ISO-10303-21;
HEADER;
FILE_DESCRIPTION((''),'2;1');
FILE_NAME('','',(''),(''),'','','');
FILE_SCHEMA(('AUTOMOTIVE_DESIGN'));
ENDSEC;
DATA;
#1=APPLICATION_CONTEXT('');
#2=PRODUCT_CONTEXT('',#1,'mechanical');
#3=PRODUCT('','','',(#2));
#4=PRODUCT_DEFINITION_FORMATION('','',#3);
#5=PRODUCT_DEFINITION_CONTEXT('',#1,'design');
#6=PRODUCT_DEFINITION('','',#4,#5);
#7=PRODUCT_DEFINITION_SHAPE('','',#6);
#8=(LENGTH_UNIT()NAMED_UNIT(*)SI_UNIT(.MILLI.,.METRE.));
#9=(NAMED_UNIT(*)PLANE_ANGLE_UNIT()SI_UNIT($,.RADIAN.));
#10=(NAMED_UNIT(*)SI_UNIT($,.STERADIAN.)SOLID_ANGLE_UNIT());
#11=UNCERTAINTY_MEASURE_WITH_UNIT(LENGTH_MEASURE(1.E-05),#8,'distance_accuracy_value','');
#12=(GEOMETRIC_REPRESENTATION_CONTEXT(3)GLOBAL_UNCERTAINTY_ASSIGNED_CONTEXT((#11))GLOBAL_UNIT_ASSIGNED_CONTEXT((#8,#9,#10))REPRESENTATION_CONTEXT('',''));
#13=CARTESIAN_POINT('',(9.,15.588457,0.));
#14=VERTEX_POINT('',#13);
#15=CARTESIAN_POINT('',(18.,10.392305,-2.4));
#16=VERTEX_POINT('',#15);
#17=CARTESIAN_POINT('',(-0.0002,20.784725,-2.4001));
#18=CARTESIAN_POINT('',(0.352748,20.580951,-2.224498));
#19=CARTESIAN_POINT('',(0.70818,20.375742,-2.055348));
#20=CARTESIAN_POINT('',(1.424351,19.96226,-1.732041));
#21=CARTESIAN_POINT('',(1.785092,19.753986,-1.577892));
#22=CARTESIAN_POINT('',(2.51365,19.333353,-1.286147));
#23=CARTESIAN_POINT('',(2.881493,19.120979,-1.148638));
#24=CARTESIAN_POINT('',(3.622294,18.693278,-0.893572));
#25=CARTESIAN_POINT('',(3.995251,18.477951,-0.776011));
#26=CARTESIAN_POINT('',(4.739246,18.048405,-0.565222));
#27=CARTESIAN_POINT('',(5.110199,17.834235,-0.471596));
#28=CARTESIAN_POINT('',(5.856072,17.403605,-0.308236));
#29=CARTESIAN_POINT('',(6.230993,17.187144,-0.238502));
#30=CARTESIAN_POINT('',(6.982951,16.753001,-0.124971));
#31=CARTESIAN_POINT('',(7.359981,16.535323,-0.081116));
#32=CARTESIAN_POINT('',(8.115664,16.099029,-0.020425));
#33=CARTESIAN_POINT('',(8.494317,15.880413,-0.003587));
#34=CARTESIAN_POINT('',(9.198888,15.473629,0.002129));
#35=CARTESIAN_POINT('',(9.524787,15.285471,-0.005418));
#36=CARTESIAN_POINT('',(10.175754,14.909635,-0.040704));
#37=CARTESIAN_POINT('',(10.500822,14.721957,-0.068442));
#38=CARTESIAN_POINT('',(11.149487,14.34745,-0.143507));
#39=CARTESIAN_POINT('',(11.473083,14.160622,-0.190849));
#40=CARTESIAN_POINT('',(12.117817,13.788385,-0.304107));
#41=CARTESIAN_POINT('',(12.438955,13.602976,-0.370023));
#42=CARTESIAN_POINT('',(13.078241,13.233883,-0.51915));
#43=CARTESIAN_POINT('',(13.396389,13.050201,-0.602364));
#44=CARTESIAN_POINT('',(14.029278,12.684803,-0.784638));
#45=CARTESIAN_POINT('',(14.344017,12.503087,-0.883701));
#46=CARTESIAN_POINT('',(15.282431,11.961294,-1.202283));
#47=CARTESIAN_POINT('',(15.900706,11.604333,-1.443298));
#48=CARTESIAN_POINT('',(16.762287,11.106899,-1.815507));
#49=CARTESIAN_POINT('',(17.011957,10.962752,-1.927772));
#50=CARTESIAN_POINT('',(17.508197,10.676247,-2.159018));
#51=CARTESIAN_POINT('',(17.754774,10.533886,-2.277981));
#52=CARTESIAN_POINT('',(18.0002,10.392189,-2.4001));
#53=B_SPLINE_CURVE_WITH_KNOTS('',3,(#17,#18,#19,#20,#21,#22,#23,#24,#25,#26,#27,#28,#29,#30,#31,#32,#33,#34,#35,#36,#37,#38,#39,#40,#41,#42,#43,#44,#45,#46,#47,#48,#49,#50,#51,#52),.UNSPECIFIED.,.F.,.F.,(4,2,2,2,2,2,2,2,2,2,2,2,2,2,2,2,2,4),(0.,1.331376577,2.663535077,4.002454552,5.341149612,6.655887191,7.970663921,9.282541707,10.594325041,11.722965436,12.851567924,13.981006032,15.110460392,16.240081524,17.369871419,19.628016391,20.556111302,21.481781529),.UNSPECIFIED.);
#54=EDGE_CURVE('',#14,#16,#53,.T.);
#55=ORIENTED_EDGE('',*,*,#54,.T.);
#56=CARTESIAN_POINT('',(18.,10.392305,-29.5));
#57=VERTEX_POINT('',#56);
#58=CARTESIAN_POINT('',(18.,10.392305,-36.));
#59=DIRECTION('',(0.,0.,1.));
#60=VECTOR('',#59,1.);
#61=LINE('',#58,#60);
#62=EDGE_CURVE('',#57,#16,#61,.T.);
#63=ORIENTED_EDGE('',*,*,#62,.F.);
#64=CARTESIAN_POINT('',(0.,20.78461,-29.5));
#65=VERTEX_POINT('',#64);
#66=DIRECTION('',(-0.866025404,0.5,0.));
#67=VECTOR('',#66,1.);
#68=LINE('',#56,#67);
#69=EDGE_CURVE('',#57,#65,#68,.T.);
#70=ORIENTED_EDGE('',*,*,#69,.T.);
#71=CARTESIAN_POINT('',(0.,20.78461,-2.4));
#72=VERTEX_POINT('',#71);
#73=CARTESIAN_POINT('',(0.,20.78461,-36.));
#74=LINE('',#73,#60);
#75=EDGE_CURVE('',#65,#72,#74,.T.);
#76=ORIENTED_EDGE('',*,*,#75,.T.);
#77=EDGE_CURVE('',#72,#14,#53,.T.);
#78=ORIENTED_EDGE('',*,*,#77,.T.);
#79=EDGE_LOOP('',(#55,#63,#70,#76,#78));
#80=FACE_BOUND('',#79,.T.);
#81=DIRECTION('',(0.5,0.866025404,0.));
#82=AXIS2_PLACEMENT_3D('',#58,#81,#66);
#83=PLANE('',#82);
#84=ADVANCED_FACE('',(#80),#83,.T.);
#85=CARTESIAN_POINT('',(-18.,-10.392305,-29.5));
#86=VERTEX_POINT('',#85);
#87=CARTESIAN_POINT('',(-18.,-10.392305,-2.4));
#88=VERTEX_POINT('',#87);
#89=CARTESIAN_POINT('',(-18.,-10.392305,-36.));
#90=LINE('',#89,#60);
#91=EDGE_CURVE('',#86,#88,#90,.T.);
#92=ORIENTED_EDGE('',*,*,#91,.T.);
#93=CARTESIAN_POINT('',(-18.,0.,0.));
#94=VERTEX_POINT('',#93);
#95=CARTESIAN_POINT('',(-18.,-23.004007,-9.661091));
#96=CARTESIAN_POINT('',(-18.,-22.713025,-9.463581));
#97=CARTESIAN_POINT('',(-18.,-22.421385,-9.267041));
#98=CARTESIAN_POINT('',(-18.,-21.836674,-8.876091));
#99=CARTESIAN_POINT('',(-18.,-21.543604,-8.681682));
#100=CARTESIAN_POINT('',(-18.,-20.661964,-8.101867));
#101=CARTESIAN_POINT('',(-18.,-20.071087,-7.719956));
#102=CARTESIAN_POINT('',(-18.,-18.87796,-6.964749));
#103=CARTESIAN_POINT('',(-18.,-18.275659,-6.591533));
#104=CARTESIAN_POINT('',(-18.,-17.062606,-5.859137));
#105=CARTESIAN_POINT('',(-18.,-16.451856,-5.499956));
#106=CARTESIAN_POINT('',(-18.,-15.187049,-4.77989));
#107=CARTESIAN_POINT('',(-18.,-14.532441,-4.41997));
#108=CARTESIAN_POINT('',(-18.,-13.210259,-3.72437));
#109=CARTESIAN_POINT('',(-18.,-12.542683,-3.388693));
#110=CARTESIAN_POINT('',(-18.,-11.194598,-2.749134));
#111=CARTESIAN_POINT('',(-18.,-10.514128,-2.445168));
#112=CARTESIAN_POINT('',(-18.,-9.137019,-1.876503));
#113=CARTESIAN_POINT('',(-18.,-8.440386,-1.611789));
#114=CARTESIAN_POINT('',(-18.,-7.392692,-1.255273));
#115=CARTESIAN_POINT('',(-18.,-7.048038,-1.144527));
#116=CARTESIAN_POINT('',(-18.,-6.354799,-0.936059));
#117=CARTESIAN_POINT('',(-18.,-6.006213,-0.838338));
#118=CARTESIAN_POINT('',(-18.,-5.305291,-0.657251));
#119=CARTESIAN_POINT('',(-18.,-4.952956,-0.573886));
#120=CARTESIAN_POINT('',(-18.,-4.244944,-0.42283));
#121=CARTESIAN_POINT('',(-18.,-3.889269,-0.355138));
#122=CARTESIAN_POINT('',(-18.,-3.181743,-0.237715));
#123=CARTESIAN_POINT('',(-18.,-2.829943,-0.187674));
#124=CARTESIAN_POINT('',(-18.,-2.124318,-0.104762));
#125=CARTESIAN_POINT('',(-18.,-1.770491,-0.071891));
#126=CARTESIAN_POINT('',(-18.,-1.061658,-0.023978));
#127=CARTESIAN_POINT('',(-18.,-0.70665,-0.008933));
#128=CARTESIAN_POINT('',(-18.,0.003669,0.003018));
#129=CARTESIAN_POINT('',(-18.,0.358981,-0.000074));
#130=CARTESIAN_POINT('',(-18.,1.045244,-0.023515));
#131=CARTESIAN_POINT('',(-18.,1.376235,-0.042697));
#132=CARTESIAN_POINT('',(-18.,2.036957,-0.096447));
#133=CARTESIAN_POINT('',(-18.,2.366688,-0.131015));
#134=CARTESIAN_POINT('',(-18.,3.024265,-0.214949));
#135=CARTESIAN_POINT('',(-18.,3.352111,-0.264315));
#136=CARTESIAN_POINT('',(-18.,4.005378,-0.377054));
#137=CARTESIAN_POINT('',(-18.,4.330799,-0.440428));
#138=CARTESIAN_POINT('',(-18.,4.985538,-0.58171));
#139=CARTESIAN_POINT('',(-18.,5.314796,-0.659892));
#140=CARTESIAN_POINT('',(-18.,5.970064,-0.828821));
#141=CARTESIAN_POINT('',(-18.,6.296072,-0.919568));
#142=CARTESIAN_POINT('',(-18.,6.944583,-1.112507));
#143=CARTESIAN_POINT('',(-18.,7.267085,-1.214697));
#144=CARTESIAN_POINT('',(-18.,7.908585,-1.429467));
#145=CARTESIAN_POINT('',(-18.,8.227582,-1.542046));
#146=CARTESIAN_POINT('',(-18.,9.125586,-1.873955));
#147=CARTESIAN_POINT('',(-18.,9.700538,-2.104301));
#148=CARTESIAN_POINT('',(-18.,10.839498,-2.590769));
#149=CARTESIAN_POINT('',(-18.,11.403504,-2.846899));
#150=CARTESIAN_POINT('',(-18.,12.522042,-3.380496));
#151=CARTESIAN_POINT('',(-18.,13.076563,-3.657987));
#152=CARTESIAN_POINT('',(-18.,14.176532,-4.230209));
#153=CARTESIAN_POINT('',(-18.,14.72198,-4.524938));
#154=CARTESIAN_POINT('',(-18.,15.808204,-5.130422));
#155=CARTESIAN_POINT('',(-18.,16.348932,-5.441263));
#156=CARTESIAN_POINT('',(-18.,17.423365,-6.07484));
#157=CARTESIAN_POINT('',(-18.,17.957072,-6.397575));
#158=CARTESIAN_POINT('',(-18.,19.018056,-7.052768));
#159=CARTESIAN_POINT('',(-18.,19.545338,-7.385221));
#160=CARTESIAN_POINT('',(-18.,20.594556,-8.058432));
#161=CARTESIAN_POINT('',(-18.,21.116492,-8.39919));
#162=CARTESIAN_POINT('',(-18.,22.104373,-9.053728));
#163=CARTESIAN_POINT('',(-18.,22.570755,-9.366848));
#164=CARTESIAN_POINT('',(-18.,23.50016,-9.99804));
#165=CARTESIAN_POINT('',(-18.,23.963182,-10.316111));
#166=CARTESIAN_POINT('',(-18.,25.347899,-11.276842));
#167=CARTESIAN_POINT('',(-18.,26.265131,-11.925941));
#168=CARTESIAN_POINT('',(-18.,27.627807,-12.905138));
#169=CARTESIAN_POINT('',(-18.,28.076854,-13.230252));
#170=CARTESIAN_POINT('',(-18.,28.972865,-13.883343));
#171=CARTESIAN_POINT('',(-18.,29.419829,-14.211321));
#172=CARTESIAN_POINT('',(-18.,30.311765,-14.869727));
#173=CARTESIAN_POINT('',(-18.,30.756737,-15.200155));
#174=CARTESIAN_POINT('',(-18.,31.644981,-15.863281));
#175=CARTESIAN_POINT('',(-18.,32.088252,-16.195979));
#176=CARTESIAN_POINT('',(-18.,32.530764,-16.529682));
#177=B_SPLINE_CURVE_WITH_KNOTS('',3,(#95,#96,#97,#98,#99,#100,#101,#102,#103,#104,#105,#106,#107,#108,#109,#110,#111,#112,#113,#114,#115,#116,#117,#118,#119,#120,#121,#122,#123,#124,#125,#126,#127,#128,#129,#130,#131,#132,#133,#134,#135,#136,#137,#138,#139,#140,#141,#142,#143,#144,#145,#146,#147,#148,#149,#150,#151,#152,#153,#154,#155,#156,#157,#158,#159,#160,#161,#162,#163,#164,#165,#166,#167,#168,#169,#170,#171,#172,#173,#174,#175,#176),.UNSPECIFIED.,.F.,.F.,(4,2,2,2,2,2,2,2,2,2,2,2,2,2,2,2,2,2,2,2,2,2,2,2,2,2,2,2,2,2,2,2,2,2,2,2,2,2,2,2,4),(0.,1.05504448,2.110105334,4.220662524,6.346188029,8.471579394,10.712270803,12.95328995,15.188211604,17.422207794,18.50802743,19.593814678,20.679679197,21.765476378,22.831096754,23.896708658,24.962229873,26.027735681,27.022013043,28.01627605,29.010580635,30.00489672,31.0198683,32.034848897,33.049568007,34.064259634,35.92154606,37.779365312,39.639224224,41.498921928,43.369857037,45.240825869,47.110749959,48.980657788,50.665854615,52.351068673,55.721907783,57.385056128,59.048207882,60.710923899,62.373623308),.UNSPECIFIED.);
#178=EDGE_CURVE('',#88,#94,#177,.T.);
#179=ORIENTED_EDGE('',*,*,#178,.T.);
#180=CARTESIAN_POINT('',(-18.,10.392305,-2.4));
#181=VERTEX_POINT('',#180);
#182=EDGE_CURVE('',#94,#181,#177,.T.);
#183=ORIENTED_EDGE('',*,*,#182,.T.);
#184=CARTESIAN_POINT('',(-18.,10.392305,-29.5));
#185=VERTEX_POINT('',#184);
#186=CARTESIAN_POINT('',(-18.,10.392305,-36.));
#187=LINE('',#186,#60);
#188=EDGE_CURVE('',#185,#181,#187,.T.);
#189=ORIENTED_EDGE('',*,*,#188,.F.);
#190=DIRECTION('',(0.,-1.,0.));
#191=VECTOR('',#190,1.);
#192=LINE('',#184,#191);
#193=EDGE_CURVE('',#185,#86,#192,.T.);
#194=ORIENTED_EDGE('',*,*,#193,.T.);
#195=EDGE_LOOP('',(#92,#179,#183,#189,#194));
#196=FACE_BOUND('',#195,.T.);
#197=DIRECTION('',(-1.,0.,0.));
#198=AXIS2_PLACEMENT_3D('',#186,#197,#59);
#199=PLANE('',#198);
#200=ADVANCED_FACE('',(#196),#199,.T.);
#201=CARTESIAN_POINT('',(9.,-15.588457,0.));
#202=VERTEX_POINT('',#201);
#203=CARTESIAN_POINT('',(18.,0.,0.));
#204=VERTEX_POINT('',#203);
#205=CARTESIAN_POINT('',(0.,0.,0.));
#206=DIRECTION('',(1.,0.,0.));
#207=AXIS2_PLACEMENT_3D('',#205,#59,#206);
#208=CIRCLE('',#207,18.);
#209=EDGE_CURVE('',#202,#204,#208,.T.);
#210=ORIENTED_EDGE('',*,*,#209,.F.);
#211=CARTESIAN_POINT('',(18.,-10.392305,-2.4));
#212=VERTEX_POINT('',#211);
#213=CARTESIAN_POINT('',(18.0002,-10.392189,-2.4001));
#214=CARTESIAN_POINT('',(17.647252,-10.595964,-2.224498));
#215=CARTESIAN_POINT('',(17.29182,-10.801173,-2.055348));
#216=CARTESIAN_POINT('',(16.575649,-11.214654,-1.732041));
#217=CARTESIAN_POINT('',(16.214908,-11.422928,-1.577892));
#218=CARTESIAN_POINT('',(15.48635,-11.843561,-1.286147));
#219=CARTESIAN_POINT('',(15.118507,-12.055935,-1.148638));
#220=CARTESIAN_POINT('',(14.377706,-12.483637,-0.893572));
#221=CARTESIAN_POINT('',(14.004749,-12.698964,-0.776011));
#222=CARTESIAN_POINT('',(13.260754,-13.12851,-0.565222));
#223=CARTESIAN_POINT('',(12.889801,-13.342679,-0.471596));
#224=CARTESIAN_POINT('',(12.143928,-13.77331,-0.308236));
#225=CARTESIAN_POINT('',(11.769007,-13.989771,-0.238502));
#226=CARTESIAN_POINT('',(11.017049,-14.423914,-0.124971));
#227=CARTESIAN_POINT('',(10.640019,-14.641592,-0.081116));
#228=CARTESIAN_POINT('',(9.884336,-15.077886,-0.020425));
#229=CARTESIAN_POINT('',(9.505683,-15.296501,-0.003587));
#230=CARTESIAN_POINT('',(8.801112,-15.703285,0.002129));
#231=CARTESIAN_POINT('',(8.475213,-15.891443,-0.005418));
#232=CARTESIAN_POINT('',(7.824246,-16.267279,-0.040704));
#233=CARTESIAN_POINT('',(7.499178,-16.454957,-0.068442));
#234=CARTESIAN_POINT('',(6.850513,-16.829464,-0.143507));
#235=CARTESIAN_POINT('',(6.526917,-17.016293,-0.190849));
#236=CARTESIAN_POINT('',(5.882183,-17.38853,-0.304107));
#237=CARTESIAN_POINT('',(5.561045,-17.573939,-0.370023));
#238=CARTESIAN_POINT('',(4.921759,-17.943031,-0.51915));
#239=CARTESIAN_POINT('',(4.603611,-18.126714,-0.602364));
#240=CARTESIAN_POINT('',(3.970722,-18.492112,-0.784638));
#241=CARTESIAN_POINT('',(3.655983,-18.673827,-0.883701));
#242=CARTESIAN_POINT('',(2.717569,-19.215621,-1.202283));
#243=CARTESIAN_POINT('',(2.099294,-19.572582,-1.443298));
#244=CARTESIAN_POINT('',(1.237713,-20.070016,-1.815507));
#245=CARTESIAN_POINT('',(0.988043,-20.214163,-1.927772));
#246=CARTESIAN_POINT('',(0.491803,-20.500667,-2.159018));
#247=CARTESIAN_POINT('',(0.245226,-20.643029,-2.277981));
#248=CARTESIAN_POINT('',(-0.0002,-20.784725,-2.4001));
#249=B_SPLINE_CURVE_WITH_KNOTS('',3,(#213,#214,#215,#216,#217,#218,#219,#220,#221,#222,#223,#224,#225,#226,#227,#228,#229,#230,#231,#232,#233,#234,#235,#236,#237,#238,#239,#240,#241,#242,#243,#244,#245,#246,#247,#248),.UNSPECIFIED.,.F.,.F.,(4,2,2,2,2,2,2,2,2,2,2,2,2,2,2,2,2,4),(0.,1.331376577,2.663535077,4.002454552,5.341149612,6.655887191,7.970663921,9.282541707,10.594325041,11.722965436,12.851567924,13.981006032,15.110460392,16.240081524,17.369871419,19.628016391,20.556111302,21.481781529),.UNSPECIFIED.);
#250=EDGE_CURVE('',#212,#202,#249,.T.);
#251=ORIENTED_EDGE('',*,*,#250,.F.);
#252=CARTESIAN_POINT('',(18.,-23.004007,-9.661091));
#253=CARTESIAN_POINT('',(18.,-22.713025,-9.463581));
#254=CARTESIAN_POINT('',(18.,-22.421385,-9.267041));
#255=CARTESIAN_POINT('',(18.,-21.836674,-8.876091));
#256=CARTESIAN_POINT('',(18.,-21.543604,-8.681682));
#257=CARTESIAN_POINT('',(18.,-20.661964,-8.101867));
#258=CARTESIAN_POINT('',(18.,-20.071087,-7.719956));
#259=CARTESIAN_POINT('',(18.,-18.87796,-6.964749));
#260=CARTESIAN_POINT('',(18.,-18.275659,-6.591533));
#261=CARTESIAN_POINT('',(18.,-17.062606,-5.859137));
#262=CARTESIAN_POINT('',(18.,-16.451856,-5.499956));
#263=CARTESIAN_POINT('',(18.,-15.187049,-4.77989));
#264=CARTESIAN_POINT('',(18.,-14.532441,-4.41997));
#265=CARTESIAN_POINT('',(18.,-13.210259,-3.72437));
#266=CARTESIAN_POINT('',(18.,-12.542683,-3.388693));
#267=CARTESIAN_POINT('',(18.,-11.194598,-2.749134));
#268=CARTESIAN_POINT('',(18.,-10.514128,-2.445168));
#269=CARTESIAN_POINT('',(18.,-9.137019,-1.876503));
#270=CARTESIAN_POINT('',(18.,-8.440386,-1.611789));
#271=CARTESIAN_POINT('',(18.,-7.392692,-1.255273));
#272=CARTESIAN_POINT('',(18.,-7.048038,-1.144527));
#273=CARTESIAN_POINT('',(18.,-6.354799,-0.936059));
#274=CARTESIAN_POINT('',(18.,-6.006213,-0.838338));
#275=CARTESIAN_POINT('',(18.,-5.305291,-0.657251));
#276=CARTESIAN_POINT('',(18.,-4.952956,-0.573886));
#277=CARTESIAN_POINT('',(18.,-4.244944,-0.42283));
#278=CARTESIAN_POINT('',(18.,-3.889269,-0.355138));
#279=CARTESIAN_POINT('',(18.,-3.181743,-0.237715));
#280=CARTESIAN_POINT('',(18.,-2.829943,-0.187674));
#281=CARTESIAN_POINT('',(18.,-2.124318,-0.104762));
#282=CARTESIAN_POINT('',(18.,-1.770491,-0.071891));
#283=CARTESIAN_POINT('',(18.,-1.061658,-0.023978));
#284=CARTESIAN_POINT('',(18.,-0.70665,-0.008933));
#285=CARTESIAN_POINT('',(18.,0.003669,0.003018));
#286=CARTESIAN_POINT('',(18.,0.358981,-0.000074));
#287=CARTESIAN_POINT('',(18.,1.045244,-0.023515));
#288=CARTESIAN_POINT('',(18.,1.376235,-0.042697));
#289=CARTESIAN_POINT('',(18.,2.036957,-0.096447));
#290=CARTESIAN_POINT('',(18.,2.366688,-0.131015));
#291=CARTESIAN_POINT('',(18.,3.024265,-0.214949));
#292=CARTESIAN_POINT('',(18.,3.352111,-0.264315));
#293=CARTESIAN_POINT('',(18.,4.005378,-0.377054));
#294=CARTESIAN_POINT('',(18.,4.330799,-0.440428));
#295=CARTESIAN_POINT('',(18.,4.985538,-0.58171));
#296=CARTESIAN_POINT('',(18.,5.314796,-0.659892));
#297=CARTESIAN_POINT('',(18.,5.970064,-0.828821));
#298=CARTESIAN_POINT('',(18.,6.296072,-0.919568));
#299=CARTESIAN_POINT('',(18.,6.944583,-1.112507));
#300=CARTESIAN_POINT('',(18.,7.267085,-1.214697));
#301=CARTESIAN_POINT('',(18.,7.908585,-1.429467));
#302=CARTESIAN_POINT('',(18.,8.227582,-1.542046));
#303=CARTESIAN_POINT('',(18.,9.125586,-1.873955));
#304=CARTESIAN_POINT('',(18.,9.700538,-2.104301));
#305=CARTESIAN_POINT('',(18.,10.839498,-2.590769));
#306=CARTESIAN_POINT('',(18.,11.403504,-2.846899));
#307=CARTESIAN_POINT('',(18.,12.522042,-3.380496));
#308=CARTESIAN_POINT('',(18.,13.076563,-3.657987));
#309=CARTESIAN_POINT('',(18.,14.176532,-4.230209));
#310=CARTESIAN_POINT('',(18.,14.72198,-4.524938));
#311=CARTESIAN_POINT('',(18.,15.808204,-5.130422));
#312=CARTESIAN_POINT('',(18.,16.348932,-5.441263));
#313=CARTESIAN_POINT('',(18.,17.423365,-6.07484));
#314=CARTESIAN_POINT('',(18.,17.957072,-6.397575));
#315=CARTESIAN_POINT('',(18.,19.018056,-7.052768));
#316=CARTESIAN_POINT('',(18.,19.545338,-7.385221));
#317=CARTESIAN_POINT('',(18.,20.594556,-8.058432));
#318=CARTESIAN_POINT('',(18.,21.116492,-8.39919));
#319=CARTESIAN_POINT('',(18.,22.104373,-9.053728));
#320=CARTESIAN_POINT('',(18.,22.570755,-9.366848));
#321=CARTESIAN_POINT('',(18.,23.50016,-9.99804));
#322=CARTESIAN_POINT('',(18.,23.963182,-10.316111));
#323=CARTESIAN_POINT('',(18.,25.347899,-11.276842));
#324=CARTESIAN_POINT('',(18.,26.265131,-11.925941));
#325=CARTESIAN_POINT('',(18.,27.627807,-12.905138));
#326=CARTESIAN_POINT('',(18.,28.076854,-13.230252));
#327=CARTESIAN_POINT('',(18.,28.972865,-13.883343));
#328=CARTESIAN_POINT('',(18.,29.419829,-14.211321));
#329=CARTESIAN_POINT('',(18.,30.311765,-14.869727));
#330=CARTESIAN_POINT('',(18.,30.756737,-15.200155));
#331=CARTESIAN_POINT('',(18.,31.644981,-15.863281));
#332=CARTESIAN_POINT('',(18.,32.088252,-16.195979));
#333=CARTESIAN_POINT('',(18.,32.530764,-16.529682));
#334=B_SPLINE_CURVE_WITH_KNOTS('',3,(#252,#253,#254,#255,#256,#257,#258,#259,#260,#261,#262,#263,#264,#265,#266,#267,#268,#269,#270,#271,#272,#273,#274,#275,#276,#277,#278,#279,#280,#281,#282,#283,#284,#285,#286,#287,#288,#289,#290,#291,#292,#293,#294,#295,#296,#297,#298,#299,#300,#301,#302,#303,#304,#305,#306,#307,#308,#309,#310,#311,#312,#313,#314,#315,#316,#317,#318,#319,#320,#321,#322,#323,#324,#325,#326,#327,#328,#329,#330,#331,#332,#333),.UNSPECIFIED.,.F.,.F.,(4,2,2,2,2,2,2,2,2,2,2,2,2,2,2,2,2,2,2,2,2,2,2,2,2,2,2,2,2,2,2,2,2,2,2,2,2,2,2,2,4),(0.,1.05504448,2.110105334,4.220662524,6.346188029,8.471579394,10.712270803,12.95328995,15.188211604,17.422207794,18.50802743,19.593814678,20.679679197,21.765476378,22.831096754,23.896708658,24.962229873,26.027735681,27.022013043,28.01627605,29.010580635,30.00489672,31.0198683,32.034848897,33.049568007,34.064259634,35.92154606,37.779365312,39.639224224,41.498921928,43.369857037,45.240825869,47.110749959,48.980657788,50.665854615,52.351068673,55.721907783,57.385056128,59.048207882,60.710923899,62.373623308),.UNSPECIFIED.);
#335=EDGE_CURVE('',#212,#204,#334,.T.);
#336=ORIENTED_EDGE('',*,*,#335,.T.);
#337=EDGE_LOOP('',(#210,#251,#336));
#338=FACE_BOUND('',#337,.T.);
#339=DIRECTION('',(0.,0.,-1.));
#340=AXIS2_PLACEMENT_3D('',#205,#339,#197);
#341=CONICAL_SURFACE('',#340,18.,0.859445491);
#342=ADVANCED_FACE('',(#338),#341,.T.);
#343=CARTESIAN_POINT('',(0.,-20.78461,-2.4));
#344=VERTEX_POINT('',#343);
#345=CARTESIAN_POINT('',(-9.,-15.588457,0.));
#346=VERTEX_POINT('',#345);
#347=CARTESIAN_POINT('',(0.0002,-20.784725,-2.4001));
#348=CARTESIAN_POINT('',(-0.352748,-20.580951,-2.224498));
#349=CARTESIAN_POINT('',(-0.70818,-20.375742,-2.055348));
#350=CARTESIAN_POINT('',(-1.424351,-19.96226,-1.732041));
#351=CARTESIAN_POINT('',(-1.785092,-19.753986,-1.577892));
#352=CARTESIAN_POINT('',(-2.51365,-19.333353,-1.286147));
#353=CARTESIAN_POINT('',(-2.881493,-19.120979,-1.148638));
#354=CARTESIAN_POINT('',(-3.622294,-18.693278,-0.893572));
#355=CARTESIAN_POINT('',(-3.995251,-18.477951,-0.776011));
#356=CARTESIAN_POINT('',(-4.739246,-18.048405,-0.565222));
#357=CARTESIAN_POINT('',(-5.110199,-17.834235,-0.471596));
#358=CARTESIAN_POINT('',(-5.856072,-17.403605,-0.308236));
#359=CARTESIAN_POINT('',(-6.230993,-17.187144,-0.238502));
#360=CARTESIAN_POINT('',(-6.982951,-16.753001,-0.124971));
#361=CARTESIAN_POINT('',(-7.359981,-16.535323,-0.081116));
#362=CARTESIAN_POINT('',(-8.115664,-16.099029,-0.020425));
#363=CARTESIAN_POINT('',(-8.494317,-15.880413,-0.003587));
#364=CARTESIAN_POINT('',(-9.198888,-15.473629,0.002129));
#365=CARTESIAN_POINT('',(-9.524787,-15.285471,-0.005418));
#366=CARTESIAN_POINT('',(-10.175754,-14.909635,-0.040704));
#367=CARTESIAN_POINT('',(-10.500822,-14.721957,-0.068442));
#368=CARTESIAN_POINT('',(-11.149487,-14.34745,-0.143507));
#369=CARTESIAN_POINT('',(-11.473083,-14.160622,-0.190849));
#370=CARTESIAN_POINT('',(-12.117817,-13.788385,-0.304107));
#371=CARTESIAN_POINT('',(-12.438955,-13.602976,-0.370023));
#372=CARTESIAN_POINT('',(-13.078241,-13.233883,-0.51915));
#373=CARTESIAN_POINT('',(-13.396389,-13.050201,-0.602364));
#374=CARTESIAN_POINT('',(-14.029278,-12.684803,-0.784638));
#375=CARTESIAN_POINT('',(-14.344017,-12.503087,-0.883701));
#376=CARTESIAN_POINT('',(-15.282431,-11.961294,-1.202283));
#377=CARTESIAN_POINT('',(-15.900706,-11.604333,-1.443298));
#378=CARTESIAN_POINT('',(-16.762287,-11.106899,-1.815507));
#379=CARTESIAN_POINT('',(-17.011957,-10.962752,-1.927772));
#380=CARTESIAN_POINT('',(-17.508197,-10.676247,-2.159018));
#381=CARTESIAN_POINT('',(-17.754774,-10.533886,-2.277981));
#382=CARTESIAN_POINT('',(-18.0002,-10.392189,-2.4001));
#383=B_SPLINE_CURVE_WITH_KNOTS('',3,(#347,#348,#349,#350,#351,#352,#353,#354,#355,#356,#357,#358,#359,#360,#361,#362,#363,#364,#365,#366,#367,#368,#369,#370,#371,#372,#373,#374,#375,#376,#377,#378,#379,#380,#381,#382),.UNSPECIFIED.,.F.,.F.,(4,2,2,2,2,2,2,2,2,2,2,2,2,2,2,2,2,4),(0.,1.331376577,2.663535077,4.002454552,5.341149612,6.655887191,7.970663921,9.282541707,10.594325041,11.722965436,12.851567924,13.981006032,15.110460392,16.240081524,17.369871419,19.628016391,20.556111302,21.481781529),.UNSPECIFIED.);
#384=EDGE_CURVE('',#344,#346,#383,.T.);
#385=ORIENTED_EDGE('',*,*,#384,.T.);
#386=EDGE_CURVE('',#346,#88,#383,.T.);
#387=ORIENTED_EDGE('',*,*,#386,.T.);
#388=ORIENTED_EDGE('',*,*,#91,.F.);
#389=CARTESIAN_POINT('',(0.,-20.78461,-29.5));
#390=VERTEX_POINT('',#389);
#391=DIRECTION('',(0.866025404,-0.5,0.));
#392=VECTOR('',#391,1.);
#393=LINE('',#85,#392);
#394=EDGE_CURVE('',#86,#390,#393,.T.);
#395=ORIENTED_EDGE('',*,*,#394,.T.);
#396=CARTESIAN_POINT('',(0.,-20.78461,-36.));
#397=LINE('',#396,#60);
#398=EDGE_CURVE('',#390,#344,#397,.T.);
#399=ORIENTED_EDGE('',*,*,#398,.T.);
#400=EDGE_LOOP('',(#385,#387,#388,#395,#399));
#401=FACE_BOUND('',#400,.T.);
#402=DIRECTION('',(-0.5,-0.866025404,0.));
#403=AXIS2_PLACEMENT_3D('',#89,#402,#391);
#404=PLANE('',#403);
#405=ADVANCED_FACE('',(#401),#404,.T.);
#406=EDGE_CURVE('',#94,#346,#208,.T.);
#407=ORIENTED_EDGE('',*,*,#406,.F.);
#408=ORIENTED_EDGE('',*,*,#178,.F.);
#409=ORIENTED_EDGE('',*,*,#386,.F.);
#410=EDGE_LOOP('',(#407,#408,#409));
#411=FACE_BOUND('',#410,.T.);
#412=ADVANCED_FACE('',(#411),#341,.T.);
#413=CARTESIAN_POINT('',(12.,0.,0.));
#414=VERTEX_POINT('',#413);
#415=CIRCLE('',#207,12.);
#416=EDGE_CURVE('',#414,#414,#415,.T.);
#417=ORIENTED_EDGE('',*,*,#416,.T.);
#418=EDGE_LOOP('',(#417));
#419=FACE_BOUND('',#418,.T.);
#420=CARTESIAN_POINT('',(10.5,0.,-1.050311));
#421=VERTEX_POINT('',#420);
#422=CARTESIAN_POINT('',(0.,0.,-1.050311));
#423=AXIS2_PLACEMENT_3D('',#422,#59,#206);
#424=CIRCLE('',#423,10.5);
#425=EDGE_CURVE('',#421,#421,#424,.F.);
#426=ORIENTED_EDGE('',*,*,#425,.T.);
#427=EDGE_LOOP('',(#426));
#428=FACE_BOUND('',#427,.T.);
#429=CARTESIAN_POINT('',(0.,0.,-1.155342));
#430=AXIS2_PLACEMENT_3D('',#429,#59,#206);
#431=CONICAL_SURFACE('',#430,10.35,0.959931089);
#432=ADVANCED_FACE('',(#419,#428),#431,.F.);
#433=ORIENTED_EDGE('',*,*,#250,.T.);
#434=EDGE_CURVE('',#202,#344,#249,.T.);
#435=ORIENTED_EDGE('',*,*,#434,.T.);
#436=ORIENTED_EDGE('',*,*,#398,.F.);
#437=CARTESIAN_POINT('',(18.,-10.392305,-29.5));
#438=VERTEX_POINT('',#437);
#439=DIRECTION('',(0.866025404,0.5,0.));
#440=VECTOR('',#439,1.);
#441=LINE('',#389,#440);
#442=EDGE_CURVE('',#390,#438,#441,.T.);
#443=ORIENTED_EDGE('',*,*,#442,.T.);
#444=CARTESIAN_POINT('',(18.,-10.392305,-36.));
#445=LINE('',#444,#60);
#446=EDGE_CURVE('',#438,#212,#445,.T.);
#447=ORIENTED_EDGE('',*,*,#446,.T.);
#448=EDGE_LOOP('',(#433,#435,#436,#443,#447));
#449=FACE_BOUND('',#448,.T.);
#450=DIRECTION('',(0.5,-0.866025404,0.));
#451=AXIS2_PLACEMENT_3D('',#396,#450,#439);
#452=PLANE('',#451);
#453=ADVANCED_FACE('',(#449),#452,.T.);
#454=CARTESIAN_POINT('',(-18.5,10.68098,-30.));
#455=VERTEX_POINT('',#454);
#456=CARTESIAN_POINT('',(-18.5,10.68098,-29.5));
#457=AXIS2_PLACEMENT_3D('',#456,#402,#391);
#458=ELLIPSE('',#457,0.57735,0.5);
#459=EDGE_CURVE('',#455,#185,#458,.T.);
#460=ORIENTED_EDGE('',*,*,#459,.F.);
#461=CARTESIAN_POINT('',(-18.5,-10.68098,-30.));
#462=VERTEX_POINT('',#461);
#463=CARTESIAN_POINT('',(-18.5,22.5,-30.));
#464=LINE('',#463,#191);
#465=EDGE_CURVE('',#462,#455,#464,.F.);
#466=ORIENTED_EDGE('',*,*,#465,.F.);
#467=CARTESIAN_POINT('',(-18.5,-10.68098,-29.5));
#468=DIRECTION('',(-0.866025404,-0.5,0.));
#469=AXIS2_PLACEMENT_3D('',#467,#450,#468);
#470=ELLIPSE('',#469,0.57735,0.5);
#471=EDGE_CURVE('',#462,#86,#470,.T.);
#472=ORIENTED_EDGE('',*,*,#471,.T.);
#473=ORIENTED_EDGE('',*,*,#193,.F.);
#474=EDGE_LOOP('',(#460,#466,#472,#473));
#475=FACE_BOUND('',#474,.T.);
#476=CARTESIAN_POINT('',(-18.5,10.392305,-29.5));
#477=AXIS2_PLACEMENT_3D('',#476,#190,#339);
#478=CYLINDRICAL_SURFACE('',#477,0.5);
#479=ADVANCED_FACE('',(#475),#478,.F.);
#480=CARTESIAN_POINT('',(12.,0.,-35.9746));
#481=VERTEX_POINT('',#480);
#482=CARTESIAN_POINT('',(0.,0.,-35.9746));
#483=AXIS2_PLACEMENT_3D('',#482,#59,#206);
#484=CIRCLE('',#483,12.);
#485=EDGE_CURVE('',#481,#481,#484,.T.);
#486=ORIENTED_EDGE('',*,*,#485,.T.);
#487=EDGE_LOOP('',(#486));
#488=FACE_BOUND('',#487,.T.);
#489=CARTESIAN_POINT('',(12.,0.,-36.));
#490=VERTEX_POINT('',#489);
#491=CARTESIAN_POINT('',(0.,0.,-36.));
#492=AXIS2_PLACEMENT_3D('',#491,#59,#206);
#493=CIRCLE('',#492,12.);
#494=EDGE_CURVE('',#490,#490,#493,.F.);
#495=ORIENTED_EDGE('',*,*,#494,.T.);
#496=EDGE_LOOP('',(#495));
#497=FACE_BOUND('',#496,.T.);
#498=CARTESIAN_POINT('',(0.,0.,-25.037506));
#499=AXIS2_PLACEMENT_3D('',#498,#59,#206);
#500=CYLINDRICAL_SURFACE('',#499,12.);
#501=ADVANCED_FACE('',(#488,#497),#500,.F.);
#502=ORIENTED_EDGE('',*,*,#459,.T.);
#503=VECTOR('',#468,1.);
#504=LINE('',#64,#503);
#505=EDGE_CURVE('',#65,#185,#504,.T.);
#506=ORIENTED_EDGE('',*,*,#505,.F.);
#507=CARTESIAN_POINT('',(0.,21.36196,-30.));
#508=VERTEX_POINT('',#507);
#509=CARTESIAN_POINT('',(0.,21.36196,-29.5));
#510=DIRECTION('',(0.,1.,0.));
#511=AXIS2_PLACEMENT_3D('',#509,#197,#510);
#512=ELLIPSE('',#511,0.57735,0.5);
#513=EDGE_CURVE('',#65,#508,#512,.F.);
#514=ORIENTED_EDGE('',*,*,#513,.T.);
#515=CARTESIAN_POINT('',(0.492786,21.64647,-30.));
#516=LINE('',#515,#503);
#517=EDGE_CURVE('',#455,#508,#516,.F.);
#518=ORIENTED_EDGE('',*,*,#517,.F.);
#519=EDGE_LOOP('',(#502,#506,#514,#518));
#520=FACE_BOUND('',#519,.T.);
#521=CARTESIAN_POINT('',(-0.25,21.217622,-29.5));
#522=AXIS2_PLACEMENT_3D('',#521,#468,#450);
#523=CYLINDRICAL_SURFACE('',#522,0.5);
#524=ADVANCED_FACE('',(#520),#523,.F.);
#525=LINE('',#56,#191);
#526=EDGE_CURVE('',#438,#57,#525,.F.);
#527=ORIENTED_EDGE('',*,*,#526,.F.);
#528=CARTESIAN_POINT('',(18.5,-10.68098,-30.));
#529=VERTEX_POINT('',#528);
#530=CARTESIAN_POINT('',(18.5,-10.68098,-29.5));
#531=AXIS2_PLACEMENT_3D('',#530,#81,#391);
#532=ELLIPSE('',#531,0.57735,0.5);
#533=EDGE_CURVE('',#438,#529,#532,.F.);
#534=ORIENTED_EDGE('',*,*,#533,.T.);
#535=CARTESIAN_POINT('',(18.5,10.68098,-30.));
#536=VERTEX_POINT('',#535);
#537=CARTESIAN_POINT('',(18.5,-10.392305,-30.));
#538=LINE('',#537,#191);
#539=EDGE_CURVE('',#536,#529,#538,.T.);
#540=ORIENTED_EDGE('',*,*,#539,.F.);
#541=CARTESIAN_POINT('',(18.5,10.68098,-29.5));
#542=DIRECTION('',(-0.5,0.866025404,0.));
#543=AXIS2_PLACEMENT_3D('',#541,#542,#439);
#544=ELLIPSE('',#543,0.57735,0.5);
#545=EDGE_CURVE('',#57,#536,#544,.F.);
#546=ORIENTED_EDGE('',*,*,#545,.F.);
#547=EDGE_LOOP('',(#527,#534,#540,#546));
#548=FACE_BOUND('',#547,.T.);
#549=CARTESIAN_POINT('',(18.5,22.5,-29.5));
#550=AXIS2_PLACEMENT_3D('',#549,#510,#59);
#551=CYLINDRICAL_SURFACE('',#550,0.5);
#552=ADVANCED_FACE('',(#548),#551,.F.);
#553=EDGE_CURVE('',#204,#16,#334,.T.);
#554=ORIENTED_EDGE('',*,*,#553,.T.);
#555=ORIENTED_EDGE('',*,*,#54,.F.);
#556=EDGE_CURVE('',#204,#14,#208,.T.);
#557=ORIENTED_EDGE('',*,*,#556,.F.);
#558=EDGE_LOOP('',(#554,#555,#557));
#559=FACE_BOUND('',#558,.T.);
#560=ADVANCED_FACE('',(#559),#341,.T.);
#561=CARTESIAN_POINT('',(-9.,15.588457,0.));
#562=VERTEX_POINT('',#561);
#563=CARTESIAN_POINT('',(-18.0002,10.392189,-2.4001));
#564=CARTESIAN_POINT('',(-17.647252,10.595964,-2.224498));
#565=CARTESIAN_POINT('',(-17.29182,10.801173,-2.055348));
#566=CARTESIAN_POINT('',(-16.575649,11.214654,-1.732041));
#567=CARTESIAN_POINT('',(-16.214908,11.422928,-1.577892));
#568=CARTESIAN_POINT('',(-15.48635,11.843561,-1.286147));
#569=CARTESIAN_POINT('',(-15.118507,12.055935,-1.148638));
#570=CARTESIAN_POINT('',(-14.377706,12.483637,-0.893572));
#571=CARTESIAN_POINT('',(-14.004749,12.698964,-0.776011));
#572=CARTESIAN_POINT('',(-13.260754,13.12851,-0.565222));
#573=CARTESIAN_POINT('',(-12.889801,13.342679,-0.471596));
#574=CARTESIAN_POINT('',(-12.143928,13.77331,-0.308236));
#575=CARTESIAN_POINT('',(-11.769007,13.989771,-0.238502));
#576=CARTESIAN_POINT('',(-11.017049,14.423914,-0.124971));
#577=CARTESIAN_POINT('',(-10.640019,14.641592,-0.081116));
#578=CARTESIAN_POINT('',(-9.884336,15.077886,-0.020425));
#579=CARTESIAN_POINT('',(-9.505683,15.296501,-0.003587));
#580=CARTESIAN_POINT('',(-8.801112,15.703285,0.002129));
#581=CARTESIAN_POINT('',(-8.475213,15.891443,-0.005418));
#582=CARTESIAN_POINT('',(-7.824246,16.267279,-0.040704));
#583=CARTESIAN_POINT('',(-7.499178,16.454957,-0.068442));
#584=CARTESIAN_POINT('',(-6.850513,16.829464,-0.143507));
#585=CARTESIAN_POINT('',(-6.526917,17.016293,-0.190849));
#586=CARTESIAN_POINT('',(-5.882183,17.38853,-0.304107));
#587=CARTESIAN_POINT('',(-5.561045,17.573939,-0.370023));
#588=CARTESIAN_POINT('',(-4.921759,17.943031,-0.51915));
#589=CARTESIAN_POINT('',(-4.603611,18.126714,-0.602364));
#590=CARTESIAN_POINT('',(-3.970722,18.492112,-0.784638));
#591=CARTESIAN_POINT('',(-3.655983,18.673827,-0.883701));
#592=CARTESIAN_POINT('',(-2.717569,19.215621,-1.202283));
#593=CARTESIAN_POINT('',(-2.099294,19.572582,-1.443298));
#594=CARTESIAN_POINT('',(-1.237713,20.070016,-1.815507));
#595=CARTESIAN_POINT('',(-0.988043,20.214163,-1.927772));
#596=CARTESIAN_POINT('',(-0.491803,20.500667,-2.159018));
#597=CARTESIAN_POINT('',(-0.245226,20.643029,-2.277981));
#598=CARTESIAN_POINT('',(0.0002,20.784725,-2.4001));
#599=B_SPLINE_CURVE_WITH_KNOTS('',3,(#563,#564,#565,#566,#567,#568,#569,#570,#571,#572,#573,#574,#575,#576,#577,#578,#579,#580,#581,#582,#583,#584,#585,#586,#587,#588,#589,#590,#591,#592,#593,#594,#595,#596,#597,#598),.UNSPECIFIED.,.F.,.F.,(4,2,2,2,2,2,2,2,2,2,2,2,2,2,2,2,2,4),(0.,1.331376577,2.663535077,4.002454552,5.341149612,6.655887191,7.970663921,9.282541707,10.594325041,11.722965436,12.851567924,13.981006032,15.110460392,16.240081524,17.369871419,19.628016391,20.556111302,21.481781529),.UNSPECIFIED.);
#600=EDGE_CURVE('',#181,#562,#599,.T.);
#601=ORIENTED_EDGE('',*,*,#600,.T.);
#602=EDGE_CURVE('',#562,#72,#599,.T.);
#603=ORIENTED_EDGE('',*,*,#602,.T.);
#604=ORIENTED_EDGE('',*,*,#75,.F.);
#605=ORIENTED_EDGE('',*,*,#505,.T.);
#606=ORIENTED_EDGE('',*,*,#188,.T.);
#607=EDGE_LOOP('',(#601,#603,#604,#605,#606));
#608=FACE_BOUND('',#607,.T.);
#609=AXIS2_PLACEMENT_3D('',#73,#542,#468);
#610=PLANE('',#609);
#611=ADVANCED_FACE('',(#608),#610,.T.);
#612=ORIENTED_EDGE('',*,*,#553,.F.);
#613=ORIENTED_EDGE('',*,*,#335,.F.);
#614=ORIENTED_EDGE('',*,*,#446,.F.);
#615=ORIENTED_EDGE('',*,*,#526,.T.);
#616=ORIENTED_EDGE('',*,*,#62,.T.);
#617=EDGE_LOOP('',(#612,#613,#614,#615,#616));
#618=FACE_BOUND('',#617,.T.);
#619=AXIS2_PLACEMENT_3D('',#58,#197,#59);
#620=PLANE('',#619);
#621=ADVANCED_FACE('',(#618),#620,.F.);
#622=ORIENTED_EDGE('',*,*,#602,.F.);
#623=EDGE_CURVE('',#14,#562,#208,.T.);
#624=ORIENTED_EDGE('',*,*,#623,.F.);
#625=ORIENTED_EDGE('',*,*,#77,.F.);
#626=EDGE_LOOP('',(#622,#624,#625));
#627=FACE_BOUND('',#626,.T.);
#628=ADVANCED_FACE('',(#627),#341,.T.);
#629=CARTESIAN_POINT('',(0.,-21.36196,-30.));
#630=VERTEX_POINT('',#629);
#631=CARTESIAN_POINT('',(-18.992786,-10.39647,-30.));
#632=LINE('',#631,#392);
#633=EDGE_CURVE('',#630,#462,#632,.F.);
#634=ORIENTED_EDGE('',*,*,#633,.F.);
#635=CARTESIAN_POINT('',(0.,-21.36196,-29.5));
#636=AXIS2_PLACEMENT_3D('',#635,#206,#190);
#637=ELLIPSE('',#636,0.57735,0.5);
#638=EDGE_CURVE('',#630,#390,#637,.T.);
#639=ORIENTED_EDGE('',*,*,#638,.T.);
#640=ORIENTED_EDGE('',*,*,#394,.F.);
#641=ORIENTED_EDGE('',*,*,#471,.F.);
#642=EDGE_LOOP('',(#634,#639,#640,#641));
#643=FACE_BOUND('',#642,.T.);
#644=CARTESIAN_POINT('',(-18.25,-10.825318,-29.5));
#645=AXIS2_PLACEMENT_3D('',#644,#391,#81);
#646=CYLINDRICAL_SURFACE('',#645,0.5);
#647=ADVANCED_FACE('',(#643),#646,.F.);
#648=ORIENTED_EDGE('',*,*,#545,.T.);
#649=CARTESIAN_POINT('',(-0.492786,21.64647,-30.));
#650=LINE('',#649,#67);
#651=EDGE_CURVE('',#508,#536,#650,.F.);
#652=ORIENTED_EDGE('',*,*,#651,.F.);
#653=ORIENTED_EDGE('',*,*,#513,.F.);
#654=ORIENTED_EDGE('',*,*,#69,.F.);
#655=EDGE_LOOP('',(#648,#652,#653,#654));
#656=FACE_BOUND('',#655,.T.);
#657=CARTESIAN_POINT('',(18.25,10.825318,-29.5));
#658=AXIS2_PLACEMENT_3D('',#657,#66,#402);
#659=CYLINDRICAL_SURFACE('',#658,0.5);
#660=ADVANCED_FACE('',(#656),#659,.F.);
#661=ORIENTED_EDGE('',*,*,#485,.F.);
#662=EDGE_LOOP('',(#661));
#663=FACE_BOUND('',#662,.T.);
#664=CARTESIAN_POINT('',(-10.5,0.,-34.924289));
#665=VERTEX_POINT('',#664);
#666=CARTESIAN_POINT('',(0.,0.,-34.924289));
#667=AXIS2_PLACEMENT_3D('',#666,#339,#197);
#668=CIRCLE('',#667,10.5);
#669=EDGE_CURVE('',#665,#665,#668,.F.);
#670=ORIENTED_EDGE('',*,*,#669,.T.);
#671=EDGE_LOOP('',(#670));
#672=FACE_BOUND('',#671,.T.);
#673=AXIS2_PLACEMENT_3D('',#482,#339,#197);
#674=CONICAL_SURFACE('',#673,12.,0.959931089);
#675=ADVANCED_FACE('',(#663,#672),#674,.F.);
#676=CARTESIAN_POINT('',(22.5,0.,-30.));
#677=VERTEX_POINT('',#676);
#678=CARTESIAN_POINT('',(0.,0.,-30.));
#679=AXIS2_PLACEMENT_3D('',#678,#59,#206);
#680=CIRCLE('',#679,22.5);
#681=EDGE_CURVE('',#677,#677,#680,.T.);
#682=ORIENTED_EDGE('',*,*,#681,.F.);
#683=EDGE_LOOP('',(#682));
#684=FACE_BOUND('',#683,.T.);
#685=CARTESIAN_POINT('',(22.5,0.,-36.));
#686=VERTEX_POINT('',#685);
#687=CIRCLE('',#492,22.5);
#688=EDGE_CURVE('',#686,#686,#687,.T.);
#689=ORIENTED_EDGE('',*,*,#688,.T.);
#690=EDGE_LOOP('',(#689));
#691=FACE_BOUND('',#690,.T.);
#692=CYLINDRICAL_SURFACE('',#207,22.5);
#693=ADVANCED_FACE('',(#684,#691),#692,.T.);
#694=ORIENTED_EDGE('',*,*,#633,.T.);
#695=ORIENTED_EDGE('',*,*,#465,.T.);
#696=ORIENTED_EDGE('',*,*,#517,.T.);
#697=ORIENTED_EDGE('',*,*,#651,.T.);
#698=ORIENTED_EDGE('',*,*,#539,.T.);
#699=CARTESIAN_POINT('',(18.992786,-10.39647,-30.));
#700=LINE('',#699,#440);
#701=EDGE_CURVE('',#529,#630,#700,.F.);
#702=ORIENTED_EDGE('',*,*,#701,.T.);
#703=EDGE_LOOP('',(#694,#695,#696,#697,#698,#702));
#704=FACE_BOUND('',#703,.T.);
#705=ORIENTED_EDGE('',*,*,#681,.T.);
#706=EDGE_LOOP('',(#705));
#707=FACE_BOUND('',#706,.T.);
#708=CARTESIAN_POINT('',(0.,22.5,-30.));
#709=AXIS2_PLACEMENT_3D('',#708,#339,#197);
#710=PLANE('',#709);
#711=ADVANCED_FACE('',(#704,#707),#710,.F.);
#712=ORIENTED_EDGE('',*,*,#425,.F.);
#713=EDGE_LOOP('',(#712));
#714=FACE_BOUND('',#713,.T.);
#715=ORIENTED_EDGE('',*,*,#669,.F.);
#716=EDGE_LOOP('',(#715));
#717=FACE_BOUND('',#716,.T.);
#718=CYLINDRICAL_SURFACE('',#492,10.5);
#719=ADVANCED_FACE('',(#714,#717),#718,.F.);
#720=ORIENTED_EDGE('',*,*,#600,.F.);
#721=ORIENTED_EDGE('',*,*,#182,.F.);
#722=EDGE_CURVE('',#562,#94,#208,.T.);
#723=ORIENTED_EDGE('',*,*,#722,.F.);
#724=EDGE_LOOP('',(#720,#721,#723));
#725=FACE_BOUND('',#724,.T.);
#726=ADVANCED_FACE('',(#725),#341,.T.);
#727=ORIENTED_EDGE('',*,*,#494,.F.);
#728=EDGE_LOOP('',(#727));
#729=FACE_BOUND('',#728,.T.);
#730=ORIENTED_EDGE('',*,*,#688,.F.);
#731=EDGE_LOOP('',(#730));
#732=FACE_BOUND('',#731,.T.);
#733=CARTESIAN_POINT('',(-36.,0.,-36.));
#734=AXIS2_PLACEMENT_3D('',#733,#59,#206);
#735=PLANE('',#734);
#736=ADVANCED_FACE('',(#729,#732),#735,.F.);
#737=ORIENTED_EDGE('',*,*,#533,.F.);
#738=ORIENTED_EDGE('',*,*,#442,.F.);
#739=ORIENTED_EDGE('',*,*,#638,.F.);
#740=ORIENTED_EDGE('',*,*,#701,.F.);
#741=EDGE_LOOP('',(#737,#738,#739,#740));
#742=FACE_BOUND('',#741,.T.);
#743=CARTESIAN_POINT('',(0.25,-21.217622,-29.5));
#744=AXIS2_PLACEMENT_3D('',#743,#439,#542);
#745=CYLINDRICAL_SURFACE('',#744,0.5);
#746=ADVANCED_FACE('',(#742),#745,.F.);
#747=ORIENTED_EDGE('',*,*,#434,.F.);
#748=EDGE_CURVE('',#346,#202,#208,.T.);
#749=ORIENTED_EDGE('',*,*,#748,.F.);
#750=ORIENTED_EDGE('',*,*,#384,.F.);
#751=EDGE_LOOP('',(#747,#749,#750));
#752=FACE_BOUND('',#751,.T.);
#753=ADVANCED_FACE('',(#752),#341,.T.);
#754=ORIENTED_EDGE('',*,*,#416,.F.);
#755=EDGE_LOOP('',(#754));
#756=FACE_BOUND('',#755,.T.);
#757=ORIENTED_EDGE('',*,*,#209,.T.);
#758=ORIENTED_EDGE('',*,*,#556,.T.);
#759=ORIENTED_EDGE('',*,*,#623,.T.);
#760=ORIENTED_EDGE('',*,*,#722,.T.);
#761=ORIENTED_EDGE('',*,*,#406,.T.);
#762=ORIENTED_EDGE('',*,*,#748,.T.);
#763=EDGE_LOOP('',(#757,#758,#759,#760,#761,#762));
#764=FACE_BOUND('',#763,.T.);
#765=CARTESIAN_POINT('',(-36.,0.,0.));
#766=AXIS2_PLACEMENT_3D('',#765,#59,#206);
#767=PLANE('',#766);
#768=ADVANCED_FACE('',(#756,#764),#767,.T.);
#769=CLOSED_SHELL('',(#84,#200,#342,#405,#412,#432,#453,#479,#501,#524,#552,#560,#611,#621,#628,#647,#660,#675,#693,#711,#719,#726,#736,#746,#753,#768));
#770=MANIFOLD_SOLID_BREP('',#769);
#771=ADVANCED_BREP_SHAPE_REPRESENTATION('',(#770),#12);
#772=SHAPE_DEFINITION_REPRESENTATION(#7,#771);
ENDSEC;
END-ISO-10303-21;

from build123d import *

# Parameters (mm, degrees)
BASENUT_START = -36
BASENUTSKE_R  = 10.5
BASENUT_DEPTH = 36
COLLARSKE_W   = 6
COLLARSKE_H   = 12
FILLET_2_R    = 0.5


# Read off the part's stored shape, not the designer's step: ThreadSchematic
with BuildPart() as part:
    # BaseNutSke → BaseNut (new body)
    with BuildSketch(Plane.XY.offset(BASENUT_START)):
        Polygon((18, 10.392304845), (18, -10.392304845), (0, -20.784609691), (-18, -10.392304845), (-18, 10.392304845), (0, 20.784609691), align=None)
        Circle(BASENUTSKE_R, mode=Mode.SUBTRACT)
    extrude(amount=BASENUT_DEPTH)

    # Sketch5 (on Right Plane) → EndChamfer (revolve, cut)
    with BuildSketch(Plane(origin=(0, 0, 0), x_dir=(0, 0, -1), z_dir=(1, 0, 0))):
        Polygon((35.9746, 12), (34.819257562, 10.35), (36.0254, 10.35), (36.0254, 12), align=None)
    revolve(axis=Axis((0, 10.35, -36.0254), (0, 0, 1)), mode=Mode.SUBTRACT)

    # CollarSke → Collar (revolve)
    with BuildSketch(Plane(origin=(0, 0, 0), x_dir=(0, 0, -1), z_dir=(1, 0, 0)), mode=Mode.PRIVATE) as collar_sk:
        with Locations((33, 16.5)):
            Rectangle(COLLARSKE_W, COLLARSKE_H)
    revolve(collar_sk.sketch.rotate(Axis((0, 0, 0), (0, 0, -1)), 90), axis=Axis((0, 0, 0), (0, 0, -1)))

    # Sketch3 → Chamfer 2 (revolve, cut)
    with BuildSketch(Plane(origin=(0, 0, 0), x_dir=(0, 0, -1), z_dir=(1, 0, 0))):
        Polygon((2.4, 33.484609691), (-12.7, 33.484609691), (-12.7, 18), (0, 18), (2.4, 20.784609691), align=None)
    revolve(axis=Axis((0, 0, 0), (0, 0, -1)), mode=Mode.SUBTRACT)

    # ThreadSchematic outline → ThreadSchematic (revolve, cut)
    with BuildSketch(Plane.XZ):
        Polygon((10.5, 0), (10.5, -1.050311307), (12, 0), align=None)
        Polygon((12, -35.9746), (10.5, -34.924288693), (10.5, -36), (12, -36), align=None)
    revolve(axis=Axis((0, 0, 0), (0, 0, 1)), mode=Mode.SUBTRACT)

    # Fillet 2
    fillet_2_edges = [part.edges().sort_by_distance(p)[0] for p in [
        (9, 15.588457268, -30),
        (-9, 15.588457268, -30),
        (-18, 0, -30),
        (-9, -15.588457268, -30),
        (9, -15.588457268, -30),
        (18, 0, -30),
    ]]
    fillet(fillet_2_edges, radius=FILLET_2_R)


solid = part.part
